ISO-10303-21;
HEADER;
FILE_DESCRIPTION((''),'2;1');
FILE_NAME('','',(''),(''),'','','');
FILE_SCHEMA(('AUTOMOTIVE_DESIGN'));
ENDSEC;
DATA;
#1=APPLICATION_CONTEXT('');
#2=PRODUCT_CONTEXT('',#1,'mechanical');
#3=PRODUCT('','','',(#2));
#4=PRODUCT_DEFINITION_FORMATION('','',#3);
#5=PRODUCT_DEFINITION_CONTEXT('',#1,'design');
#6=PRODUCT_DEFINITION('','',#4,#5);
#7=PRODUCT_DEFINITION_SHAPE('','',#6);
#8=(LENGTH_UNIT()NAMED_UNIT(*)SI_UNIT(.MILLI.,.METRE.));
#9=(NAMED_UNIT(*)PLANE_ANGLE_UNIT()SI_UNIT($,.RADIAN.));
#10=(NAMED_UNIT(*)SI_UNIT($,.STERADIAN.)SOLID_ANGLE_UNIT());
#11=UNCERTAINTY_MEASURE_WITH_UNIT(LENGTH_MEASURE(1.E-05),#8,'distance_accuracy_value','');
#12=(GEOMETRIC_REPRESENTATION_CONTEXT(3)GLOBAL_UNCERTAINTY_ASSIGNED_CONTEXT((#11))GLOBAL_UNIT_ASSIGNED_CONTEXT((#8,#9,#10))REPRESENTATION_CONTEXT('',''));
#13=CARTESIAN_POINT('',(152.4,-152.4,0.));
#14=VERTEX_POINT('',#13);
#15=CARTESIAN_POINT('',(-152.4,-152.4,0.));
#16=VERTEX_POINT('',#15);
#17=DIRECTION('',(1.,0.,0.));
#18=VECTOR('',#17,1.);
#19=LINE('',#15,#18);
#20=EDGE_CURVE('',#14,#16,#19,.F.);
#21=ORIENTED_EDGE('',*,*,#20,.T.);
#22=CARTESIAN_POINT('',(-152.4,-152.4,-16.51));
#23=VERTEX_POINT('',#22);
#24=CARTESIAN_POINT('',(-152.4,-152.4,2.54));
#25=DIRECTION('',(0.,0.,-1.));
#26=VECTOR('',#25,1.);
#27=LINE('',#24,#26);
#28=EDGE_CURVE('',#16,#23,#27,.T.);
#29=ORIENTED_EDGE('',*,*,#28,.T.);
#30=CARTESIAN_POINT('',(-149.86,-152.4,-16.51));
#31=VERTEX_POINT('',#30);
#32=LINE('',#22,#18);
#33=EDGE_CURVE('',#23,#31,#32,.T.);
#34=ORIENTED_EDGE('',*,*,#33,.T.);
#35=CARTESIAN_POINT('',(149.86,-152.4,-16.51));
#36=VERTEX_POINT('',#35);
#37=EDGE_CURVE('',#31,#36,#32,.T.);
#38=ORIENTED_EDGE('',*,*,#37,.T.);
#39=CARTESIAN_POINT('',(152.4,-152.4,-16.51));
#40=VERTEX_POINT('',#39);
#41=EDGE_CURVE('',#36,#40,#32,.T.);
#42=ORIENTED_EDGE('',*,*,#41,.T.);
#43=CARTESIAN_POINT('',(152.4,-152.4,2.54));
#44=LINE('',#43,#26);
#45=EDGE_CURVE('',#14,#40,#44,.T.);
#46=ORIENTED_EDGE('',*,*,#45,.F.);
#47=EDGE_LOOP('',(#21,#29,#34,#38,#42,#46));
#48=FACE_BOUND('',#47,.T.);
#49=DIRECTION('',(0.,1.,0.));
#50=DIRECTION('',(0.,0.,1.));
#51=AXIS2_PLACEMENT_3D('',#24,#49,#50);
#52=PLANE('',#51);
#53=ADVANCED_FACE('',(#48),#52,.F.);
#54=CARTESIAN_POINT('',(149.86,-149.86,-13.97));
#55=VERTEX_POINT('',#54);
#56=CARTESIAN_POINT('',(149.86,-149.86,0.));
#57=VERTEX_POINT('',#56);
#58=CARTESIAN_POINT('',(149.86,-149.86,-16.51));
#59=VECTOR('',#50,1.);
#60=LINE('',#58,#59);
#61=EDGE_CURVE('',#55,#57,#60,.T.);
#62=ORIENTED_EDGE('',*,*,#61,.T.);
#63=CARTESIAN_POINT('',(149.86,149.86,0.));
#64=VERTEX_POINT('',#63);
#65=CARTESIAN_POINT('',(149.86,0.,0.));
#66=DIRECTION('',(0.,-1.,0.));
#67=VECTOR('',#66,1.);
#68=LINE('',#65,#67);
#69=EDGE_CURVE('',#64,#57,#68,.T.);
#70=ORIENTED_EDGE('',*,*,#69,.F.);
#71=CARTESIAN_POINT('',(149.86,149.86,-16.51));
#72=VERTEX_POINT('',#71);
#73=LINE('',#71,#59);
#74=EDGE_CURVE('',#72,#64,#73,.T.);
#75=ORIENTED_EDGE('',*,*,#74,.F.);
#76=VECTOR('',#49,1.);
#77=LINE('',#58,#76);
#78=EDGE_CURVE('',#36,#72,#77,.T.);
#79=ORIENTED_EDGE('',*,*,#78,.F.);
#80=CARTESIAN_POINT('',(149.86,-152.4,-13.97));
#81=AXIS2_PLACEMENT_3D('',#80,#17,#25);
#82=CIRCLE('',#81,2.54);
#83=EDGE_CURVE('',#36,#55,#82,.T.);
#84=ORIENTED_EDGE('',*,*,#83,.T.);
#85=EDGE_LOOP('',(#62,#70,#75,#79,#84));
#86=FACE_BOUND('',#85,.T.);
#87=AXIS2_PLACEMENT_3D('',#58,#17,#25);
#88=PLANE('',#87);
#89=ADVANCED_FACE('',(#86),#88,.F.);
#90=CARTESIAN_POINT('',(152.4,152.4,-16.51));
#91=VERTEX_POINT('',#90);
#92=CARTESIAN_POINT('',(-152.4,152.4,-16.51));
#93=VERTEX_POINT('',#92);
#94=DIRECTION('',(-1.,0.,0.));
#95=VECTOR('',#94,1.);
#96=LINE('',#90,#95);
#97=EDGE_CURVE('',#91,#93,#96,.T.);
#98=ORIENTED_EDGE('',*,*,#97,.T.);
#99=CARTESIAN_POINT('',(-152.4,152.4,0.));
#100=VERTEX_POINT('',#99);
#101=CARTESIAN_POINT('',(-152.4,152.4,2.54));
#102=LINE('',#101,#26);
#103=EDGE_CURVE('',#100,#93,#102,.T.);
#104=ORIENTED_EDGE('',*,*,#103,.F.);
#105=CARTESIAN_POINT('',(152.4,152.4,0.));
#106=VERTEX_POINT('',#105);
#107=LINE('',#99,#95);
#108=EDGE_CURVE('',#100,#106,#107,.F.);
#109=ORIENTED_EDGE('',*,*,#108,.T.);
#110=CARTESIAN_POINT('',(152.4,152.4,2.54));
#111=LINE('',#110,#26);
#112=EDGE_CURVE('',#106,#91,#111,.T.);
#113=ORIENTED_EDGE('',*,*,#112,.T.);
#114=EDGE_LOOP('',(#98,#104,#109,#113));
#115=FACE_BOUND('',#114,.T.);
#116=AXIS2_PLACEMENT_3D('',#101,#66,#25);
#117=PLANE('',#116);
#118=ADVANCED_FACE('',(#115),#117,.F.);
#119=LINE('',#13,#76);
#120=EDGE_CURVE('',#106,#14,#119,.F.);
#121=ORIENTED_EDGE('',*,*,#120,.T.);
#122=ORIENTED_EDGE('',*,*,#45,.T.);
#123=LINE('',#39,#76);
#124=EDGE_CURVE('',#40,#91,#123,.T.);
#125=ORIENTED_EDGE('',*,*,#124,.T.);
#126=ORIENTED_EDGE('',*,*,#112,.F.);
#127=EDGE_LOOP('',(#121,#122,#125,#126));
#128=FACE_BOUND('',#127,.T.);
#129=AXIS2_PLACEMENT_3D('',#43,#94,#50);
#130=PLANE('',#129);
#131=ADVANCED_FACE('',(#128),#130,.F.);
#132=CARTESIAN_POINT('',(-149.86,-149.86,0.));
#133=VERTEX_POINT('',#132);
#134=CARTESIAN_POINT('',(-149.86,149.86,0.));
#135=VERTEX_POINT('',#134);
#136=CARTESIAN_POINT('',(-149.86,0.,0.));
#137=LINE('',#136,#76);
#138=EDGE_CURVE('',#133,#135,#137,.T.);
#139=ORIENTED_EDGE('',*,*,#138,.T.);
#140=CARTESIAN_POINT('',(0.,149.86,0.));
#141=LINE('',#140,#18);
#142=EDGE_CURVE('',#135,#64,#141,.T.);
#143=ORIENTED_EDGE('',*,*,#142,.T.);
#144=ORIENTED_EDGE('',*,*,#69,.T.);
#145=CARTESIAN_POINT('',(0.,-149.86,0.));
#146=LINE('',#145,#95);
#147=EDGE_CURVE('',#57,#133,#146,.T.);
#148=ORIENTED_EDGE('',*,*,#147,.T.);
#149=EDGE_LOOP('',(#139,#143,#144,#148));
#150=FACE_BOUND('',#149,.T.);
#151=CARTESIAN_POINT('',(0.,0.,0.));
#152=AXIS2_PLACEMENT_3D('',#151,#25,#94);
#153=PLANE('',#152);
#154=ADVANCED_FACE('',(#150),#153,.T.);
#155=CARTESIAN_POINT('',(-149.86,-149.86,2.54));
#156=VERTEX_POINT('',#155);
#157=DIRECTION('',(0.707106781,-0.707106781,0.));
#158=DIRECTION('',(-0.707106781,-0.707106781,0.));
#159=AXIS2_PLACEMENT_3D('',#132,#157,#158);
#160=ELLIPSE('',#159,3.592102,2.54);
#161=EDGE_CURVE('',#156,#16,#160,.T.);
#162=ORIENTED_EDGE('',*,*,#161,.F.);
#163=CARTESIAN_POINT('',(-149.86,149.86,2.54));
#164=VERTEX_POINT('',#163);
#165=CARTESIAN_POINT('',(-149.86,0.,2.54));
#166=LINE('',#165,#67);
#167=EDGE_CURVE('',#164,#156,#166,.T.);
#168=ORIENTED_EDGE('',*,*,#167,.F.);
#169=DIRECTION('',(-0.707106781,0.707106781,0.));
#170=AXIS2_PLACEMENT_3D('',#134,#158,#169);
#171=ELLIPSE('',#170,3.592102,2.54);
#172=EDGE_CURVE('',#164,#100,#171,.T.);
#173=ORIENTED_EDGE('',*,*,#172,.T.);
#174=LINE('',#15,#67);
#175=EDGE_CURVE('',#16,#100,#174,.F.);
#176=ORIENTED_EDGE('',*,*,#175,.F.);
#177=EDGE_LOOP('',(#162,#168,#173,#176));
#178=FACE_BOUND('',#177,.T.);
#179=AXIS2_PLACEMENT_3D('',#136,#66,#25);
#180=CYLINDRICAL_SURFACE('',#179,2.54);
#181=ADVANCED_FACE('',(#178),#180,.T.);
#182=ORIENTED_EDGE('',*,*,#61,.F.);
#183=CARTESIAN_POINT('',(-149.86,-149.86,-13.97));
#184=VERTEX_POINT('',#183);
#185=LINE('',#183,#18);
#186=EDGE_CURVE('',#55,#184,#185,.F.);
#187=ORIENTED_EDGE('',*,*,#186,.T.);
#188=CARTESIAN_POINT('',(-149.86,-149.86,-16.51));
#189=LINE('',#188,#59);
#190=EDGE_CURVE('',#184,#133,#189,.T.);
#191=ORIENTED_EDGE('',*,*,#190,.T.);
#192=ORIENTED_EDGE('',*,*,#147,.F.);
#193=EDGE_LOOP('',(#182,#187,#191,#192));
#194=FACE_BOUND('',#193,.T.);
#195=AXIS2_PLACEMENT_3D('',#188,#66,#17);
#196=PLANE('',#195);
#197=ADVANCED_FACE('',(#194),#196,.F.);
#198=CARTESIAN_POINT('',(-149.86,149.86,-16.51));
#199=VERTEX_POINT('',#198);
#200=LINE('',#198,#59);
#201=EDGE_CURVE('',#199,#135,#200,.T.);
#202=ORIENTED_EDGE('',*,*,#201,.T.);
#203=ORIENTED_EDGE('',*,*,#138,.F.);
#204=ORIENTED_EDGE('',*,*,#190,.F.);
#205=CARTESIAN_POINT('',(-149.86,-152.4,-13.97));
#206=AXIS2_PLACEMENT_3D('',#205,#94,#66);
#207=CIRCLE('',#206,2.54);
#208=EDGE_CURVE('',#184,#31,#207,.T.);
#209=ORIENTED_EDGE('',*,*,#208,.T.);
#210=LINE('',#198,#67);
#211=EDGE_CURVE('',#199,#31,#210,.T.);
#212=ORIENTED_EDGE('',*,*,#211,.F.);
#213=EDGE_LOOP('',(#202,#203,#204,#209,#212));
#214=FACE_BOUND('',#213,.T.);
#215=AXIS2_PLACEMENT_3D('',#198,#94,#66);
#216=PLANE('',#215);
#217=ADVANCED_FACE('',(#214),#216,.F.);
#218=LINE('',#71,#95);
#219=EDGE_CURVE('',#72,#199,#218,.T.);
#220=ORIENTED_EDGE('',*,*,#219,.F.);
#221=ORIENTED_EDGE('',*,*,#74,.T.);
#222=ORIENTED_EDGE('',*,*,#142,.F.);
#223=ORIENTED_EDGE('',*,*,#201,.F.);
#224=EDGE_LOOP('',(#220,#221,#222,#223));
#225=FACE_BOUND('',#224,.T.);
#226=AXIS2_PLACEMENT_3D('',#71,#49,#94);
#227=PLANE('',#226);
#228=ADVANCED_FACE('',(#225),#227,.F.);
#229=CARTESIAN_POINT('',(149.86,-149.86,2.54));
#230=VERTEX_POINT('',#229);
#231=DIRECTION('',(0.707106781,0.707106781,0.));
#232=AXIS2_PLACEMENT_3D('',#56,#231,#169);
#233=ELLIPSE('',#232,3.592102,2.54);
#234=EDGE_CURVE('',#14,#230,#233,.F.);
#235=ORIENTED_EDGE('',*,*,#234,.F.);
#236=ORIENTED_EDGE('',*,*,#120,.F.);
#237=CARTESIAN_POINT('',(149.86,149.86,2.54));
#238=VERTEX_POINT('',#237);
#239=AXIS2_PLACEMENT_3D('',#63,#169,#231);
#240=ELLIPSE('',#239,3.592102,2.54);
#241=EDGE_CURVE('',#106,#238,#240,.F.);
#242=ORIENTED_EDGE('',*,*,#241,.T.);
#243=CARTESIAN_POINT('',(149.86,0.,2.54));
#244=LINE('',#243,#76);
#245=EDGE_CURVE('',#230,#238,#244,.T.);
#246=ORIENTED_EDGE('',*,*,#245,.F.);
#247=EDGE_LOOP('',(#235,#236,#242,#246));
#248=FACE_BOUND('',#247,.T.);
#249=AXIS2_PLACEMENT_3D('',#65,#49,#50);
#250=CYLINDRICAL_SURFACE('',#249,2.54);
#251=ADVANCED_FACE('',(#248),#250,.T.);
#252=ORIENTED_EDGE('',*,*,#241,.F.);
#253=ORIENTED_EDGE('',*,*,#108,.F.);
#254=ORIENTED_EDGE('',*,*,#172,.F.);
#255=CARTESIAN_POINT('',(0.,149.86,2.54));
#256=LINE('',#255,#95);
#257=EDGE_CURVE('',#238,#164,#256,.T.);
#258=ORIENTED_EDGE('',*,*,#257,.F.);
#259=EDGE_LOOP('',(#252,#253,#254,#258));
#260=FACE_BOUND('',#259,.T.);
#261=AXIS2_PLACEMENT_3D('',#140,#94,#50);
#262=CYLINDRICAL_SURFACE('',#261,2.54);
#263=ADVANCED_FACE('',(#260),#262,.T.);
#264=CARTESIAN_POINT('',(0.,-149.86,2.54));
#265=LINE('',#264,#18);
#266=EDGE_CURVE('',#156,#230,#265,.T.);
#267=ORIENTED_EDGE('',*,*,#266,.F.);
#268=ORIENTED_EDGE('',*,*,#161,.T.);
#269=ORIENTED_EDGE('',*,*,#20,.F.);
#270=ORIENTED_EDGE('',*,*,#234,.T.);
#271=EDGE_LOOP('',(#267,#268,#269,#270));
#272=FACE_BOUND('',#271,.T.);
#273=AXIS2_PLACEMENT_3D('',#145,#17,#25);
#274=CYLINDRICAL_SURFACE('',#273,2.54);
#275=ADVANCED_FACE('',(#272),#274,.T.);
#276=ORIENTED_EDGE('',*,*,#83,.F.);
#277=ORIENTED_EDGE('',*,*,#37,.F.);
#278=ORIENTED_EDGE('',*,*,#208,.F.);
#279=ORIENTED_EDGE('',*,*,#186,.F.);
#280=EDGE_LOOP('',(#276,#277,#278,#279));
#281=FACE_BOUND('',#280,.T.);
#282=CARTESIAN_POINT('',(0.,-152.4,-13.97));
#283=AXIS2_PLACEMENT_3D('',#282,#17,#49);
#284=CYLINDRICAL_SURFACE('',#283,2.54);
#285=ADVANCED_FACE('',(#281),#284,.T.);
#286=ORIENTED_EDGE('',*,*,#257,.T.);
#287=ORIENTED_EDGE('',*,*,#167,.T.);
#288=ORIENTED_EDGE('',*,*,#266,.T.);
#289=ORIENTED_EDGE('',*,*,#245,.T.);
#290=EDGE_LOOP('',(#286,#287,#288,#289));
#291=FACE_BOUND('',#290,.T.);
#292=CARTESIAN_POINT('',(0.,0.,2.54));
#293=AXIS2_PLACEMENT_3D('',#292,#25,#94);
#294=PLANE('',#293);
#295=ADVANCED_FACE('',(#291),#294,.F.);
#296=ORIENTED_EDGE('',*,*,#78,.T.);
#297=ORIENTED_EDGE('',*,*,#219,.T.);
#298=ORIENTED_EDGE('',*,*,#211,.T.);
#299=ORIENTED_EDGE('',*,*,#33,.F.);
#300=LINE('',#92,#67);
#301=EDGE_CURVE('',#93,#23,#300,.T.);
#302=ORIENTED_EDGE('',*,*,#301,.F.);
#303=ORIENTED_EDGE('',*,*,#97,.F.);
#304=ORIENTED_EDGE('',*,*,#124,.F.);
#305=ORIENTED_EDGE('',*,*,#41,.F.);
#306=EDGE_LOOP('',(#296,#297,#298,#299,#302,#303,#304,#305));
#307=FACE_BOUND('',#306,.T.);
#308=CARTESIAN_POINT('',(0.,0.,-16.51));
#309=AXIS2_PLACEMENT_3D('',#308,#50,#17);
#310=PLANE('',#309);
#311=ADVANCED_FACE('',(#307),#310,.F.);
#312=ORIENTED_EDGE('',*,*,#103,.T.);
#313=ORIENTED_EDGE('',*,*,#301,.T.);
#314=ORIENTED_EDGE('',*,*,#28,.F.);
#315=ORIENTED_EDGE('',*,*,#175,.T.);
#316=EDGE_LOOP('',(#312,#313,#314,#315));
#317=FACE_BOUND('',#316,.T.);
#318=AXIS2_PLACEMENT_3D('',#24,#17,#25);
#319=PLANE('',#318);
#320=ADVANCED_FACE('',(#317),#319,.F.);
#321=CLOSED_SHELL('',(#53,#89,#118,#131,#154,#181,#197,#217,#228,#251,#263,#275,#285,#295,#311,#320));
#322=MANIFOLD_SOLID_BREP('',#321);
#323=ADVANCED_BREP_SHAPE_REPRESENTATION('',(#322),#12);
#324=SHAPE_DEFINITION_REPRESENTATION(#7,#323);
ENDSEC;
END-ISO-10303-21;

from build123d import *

# Parameters (mm, degrees)
SKETCH1_W           = 304.8
SKETCH1_H           = 304.8
BOSS_EXTRUDE1_DEPTH = 2.54
SKETCH2_W           = 304.8
SKETCH2_H           = 304.8
SKETCH2_W_2         = 299.72
SKETCH2_H_2         = 299.72
BOSS_EXTRUDE2_DEPTH = 19.05
FILLET1_R           = 2.54


with BuildPart() as part:
    # Sketch1 → Boss-Extrude1 (new body)
    with BuildSketch(Plane.XY):
        Rectangle(SKETCH1_W, SKETCH1_H)
    extrude(amount=BOSS_EXTRUDE1_DEPTH)

    # Sketch2 → Boss-Extrude2 (add)
    with BuildSketch(Plane.XY.offset(2.54)):
        Rectangle(SKETCH2_W, SKETCH2_H)
        Rectangle(SKETCH2_W_2, SKETCH2_H_2, mode=Mode.SUBTRACT)
    extrude(amount=-BOSS_EXTRUDE2_DEPTH)

    # Fillet1
    fillet1_edges = [part.edges().sort_by_distance(p)[0] for p in [
        (-152.4, 0, 2.54),
        (0, -152.4, 2.54),
        (0, -149.86, -16.51),
        (152.4, 0, 2.54),
        (0, 152.4, 2.54),
    ]]
    fillet(fillet1_edges, radius=FILLET1_R - 0.0001)  # a hair under: the kernel refuses the full size


solid = part.part
